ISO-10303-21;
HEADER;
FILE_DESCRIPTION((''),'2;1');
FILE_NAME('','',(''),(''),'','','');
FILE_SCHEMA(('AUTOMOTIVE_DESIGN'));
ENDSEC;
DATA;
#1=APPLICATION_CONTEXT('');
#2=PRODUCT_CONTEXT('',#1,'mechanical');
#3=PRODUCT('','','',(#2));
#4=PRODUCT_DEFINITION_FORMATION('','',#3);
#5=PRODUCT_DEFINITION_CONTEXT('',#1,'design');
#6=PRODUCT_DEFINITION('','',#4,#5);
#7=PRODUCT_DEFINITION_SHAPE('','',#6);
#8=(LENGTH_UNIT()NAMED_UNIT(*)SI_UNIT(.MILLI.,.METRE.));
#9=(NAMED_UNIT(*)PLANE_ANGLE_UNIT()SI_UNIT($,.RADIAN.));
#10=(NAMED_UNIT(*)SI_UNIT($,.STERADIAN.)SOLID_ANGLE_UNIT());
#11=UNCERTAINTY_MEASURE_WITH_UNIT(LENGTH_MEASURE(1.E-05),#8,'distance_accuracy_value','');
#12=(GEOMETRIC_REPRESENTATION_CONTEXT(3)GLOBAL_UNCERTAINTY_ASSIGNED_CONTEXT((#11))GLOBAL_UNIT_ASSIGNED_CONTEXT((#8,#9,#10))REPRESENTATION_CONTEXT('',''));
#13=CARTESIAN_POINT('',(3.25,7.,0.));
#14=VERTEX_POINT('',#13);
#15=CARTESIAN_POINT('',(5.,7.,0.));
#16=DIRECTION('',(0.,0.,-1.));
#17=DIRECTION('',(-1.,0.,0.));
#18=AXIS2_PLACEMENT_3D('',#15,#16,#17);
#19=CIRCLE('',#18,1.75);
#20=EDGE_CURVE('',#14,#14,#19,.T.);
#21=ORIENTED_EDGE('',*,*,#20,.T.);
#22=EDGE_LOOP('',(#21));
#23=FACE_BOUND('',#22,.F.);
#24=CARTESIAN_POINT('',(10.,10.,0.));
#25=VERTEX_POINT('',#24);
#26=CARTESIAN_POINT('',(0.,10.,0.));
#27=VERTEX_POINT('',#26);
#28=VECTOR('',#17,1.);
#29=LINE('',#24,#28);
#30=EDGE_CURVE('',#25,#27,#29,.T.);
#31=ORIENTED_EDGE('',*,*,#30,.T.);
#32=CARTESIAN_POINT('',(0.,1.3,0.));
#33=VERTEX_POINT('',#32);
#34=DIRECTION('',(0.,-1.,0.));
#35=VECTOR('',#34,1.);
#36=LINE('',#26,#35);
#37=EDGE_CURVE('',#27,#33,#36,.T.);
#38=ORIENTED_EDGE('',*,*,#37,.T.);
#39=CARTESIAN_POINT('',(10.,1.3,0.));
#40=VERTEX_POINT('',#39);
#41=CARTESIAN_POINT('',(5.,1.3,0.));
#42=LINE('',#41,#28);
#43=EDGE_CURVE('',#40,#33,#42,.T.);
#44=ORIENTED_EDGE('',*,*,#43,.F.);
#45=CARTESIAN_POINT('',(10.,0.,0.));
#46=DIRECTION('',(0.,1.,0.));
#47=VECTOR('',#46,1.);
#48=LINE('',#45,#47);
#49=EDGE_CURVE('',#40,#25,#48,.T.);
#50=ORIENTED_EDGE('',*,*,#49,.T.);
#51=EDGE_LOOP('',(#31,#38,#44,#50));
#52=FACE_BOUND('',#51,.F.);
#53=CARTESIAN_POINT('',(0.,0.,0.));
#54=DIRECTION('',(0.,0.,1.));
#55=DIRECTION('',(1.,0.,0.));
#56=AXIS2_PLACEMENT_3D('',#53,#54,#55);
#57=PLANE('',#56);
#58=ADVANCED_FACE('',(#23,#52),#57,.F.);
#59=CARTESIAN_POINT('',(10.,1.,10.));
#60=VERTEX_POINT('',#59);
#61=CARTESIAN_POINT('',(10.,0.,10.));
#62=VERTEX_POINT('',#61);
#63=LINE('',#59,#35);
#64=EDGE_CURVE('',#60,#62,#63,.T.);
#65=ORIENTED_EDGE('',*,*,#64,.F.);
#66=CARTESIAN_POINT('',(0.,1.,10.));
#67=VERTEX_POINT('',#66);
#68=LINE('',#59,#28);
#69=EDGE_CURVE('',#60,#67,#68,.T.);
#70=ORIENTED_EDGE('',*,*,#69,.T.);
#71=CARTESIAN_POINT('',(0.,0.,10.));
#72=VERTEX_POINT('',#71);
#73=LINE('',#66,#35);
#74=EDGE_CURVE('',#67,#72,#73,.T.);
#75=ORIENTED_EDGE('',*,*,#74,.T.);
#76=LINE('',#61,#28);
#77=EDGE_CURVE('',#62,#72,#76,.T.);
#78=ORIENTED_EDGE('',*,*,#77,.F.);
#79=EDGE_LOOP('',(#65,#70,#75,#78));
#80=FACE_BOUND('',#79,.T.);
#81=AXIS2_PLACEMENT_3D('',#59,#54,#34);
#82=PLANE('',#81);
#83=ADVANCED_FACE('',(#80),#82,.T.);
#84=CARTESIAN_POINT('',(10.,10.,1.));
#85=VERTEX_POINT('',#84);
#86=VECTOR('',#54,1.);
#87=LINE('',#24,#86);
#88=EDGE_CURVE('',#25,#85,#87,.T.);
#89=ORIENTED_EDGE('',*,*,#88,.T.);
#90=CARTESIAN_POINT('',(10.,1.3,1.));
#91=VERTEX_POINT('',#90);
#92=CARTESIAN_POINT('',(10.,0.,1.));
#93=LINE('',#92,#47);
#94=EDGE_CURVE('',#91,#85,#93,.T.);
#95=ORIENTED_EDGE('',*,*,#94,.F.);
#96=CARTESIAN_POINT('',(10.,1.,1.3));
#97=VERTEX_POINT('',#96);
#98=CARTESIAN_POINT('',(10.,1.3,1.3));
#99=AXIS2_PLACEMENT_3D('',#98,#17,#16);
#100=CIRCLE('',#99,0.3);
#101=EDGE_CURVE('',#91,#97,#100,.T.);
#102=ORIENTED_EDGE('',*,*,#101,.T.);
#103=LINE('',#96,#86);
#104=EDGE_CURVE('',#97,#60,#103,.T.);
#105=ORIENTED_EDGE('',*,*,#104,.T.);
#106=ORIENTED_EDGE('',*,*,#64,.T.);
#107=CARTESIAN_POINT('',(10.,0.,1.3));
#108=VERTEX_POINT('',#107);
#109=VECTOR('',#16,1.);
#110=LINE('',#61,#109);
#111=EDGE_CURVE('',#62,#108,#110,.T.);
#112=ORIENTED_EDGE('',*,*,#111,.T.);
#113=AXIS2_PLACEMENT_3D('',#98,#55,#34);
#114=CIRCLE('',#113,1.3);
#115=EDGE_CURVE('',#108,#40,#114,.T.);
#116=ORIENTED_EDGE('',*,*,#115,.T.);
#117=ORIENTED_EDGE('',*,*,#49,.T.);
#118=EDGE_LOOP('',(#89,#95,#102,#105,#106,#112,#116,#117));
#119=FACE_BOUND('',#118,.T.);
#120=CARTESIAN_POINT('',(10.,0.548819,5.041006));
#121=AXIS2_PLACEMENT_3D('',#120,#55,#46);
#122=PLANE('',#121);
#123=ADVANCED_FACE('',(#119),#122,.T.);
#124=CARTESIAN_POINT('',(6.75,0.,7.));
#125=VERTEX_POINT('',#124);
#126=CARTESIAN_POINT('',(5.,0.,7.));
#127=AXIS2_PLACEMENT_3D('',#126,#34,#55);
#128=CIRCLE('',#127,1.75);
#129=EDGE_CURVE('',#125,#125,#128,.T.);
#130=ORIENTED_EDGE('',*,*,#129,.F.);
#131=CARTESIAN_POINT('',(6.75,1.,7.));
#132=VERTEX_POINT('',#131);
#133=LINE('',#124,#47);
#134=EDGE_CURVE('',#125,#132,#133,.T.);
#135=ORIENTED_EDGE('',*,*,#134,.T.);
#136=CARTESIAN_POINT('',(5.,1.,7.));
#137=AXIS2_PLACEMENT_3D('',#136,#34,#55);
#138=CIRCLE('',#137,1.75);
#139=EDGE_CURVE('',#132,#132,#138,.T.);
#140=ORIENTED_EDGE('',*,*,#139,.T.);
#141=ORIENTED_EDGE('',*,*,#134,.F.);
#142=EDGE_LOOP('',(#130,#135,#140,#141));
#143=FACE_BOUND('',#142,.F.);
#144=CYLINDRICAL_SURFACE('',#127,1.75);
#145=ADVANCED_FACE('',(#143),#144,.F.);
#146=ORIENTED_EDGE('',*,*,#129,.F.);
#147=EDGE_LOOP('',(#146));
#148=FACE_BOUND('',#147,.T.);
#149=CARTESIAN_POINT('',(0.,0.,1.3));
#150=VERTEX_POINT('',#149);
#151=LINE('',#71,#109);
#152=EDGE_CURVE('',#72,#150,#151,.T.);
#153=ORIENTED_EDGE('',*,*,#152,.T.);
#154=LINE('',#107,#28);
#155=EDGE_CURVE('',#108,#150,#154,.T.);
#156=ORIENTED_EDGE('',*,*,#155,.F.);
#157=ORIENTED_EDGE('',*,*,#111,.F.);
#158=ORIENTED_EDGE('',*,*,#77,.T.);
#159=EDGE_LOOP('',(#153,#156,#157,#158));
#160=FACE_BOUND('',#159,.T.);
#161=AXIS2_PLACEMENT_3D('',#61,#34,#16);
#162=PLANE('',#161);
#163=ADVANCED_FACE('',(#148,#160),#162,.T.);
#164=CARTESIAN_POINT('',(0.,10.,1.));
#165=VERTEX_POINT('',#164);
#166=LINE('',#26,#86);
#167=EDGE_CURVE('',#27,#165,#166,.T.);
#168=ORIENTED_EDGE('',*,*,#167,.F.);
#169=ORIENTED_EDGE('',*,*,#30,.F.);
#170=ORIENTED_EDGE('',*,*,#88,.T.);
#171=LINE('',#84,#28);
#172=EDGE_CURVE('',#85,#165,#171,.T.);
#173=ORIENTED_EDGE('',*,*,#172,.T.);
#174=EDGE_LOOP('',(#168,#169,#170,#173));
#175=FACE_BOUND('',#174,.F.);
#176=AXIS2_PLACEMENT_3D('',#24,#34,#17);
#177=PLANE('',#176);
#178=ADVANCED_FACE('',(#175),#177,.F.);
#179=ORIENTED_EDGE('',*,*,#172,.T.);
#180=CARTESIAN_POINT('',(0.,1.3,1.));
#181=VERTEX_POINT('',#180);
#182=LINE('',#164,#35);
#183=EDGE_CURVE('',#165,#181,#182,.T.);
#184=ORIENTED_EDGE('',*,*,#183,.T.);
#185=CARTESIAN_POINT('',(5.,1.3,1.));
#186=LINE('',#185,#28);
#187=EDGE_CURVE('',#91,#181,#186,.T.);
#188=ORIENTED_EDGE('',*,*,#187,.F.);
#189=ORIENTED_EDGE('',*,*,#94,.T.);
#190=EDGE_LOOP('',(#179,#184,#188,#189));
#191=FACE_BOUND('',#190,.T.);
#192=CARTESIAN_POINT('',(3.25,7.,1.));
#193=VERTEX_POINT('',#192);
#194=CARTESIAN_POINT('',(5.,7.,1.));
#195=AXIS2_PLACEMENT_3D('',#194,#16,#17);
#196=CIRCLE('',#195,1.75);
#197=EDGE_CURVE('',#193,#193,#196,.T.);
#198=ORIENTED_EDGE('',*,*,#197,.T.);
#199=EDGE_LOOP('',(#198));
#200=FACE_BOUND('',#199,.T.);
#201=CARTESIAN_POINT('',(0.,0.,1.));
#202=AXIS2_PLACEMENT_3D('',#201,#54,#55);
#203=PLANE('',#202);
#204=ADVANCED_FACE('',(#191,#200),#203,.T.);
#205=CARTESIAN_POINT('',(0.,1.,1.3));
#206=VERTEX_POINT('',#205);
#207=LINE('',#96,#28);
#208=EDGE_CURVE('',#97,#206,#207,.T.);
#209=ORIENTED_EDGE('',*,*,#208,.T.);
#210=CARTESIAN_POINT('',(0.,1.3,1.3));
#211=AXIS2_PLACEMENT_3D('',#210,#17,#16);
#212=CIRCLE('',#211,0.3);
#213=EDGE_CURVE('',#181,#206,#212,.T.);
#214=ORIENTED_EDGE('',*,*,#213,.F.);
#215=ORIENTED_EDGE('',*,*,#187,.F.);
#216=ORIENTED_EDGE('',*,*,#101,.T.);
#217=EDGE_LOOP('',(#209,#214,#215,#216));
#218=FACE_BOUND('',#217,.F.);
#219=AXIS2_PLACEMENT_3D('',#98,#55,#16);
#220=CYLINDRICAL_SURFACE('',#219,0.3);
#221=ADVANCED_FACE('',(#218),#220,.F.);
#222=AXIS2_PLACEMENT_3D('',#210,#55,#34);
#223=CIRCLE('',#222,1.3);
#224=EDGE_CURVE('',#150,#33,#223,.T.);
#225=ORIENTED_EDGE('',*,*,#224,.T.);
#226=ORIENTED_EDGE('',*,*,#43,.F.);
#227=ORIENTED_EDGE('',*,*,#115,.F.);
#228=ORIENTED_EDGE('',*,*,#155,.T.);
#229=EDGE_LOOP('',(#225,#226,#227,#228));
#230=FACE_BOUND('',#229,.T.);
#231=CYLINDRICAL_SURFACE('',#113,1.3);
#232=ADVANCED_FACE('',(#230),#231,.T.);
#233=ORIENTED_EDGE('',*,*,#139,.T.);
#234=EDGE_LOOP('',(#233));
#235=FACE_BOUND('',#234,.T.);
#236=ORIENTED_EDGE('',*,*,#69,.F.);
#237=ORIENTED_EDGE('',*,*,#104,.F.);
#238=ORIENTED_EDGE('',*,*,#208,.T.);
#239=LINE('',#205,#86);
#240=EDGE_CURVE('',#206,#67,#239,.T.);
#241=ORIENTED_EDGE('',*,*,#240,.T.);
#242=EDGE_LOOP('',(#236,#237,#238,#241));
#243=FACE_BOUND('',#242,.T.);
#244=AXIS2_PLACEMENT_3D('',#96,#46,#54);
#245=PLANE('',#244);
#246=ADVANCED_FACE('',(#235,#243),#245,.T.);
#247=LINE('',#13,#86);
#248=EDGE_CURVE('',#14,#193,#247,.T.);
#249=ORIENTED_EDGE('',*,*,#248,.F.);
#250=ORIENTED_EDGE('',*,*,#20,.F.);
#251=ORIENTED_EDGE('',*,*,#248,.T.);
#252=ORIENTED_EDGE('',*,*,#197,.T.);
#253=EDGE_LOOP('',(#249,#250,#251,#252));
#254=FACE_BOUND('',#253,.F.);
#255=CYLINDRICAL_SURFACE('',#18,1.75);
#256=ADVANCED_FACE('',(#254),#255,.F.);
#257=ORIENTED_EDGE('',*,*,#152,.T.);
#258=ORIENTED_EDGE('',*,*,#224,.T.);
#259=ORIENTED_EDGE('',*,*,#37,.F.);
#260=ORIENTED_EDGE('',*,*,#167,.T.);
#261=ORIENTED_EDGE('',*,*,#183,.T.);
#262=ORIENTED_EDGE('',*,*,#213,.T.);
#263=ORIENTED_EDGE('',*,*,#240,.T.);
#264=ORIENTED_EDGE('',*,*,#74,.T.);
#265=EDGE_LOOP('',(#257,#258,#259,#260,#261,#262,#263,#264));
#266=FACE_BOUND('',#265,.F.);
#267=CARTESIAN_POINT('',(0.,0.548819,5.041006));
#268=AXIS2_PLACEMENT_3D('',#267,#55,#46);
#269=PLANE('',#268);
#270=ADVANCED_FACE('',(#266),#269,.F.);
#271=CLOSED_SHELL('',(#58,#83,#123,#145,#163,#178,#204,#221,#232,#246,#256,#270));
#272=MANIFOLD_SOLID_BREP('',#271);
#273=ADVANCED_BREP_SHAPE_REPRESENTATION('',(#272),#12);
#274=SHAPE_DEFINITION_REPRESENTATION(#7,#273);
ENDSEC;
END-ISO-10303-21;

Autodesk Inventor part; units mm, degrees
ref_plane "YZ Plane" through (0, 0, 0) normal (1, 0, 0) x (0, 1, 0)
ref_plane "XZ Plane" through (0, 0, 0) normal (0, 1, 0) x (-1, 0, 0)
ref_plane "XY Plane" through (0, 0, 0) normal (0, 0, 1) x (1, 0, 0)
sketch "Sketch1" plane through (0, 0, 0) normal (0, 0, 1) x (1, 0, 0)
  line L0 (0, 0) -> (10, 0)
  line L1 (10, 0) -> (10, 10)
  line L2 (10, 10) -> (0, 10)
  line L3 (0, 10) -> (0, 0)
  dimension "d0" = 10
  dimension "d1" = 10
extrude "Plate1" add sketch "Sketch1" along normal blind 1
sketch "Sketch2" plane through (10, 1, 0) normal (0, -1, 0) x (1, 0, 0)
  line L0 (-10, 0) -> (0, 0)
  line L1 (0, 0) -> (0, 10)
  line L2 (0, 10) -> (-10, 10)
  line L3 (-10, 10) -> (-10, 0)
edge flange "Flange1" height 10 angle 90 thickness 1 bend radius 0.3 thickness toward (0, -1, 0) relief tear relief width 1 relief depth 0.5 edges at (5, 0, 1) wall of the first edge with corners at (0, 1, 0) (10, 1, 0) (10, 1, 10) (0, 1, 10)
bend "Bend1"
corner "Corner1"
sketch "Sketch3" plane through (0, 0, 0) normal (0, 0, -1) x (-1, 0, 0)
  circle A0 centre (-5, 7) radius 1.75
  line L0 (-10, 10) -> (0, 10) projected
  line L1 (-10, 1) -> (0, 1) projected
  point P0 (0, 0)
  point P1 (-5, 10)
  dimension "d13" = 3.5
  dimension "d14" = 6
extrude "Extrusion1" cut sketch "Sketch3" against normal blind 10
sketch "Sketch4" plane through (0, 0, 10) normal (0, -1, 0) x (1, 0, 0)
  circle A0 centre (5, -3) radius 1.75
  line L0 (0, -9) -> (10, -9) projected
  line L1 (0, 0) -> (10, 0) projected
  point P0 (0, -10)
  point P1 (5, 0)
  dimension "d17" = 3.5
  dimension "d18" = 6
extrude "Extrusion2" cut sketch "Sketch4" against normal blind 10
equation "\"d2\" = 厚度"
equation "\"d3\" = 折彎離隙寬度"
equation "\"d4\" = 折彎離隙深度"
equation "\"d5\" = 最小剩餘"
equation "\"d6\" = 轉移半徑"
equation "\"d10\" = 轉角離隙大小"
equation "\"d11\" = 間隙大小"
equation "\"d12\" = Jacobi半徑大小"
equation "\"折彎半徑\" = 厚度"
equation "\"折彎離隙寬度\" = 厚度"
equation "\"折彎離隙深度\" = 0.5 * 厚度"
equation "\"轉角離隙大小\" = 4 * 厚度"
equation "\"最小剩餘\" = 2 * 厚度"
equation "\"轉移半徑\" = 折彎半徑"
equation "\"Jacobi半徑大小\" = 折彎半徑"
equation "\"間隙大小\" = 厚度"
equation "\"厚度\" = 1"
properties part number "joint"
